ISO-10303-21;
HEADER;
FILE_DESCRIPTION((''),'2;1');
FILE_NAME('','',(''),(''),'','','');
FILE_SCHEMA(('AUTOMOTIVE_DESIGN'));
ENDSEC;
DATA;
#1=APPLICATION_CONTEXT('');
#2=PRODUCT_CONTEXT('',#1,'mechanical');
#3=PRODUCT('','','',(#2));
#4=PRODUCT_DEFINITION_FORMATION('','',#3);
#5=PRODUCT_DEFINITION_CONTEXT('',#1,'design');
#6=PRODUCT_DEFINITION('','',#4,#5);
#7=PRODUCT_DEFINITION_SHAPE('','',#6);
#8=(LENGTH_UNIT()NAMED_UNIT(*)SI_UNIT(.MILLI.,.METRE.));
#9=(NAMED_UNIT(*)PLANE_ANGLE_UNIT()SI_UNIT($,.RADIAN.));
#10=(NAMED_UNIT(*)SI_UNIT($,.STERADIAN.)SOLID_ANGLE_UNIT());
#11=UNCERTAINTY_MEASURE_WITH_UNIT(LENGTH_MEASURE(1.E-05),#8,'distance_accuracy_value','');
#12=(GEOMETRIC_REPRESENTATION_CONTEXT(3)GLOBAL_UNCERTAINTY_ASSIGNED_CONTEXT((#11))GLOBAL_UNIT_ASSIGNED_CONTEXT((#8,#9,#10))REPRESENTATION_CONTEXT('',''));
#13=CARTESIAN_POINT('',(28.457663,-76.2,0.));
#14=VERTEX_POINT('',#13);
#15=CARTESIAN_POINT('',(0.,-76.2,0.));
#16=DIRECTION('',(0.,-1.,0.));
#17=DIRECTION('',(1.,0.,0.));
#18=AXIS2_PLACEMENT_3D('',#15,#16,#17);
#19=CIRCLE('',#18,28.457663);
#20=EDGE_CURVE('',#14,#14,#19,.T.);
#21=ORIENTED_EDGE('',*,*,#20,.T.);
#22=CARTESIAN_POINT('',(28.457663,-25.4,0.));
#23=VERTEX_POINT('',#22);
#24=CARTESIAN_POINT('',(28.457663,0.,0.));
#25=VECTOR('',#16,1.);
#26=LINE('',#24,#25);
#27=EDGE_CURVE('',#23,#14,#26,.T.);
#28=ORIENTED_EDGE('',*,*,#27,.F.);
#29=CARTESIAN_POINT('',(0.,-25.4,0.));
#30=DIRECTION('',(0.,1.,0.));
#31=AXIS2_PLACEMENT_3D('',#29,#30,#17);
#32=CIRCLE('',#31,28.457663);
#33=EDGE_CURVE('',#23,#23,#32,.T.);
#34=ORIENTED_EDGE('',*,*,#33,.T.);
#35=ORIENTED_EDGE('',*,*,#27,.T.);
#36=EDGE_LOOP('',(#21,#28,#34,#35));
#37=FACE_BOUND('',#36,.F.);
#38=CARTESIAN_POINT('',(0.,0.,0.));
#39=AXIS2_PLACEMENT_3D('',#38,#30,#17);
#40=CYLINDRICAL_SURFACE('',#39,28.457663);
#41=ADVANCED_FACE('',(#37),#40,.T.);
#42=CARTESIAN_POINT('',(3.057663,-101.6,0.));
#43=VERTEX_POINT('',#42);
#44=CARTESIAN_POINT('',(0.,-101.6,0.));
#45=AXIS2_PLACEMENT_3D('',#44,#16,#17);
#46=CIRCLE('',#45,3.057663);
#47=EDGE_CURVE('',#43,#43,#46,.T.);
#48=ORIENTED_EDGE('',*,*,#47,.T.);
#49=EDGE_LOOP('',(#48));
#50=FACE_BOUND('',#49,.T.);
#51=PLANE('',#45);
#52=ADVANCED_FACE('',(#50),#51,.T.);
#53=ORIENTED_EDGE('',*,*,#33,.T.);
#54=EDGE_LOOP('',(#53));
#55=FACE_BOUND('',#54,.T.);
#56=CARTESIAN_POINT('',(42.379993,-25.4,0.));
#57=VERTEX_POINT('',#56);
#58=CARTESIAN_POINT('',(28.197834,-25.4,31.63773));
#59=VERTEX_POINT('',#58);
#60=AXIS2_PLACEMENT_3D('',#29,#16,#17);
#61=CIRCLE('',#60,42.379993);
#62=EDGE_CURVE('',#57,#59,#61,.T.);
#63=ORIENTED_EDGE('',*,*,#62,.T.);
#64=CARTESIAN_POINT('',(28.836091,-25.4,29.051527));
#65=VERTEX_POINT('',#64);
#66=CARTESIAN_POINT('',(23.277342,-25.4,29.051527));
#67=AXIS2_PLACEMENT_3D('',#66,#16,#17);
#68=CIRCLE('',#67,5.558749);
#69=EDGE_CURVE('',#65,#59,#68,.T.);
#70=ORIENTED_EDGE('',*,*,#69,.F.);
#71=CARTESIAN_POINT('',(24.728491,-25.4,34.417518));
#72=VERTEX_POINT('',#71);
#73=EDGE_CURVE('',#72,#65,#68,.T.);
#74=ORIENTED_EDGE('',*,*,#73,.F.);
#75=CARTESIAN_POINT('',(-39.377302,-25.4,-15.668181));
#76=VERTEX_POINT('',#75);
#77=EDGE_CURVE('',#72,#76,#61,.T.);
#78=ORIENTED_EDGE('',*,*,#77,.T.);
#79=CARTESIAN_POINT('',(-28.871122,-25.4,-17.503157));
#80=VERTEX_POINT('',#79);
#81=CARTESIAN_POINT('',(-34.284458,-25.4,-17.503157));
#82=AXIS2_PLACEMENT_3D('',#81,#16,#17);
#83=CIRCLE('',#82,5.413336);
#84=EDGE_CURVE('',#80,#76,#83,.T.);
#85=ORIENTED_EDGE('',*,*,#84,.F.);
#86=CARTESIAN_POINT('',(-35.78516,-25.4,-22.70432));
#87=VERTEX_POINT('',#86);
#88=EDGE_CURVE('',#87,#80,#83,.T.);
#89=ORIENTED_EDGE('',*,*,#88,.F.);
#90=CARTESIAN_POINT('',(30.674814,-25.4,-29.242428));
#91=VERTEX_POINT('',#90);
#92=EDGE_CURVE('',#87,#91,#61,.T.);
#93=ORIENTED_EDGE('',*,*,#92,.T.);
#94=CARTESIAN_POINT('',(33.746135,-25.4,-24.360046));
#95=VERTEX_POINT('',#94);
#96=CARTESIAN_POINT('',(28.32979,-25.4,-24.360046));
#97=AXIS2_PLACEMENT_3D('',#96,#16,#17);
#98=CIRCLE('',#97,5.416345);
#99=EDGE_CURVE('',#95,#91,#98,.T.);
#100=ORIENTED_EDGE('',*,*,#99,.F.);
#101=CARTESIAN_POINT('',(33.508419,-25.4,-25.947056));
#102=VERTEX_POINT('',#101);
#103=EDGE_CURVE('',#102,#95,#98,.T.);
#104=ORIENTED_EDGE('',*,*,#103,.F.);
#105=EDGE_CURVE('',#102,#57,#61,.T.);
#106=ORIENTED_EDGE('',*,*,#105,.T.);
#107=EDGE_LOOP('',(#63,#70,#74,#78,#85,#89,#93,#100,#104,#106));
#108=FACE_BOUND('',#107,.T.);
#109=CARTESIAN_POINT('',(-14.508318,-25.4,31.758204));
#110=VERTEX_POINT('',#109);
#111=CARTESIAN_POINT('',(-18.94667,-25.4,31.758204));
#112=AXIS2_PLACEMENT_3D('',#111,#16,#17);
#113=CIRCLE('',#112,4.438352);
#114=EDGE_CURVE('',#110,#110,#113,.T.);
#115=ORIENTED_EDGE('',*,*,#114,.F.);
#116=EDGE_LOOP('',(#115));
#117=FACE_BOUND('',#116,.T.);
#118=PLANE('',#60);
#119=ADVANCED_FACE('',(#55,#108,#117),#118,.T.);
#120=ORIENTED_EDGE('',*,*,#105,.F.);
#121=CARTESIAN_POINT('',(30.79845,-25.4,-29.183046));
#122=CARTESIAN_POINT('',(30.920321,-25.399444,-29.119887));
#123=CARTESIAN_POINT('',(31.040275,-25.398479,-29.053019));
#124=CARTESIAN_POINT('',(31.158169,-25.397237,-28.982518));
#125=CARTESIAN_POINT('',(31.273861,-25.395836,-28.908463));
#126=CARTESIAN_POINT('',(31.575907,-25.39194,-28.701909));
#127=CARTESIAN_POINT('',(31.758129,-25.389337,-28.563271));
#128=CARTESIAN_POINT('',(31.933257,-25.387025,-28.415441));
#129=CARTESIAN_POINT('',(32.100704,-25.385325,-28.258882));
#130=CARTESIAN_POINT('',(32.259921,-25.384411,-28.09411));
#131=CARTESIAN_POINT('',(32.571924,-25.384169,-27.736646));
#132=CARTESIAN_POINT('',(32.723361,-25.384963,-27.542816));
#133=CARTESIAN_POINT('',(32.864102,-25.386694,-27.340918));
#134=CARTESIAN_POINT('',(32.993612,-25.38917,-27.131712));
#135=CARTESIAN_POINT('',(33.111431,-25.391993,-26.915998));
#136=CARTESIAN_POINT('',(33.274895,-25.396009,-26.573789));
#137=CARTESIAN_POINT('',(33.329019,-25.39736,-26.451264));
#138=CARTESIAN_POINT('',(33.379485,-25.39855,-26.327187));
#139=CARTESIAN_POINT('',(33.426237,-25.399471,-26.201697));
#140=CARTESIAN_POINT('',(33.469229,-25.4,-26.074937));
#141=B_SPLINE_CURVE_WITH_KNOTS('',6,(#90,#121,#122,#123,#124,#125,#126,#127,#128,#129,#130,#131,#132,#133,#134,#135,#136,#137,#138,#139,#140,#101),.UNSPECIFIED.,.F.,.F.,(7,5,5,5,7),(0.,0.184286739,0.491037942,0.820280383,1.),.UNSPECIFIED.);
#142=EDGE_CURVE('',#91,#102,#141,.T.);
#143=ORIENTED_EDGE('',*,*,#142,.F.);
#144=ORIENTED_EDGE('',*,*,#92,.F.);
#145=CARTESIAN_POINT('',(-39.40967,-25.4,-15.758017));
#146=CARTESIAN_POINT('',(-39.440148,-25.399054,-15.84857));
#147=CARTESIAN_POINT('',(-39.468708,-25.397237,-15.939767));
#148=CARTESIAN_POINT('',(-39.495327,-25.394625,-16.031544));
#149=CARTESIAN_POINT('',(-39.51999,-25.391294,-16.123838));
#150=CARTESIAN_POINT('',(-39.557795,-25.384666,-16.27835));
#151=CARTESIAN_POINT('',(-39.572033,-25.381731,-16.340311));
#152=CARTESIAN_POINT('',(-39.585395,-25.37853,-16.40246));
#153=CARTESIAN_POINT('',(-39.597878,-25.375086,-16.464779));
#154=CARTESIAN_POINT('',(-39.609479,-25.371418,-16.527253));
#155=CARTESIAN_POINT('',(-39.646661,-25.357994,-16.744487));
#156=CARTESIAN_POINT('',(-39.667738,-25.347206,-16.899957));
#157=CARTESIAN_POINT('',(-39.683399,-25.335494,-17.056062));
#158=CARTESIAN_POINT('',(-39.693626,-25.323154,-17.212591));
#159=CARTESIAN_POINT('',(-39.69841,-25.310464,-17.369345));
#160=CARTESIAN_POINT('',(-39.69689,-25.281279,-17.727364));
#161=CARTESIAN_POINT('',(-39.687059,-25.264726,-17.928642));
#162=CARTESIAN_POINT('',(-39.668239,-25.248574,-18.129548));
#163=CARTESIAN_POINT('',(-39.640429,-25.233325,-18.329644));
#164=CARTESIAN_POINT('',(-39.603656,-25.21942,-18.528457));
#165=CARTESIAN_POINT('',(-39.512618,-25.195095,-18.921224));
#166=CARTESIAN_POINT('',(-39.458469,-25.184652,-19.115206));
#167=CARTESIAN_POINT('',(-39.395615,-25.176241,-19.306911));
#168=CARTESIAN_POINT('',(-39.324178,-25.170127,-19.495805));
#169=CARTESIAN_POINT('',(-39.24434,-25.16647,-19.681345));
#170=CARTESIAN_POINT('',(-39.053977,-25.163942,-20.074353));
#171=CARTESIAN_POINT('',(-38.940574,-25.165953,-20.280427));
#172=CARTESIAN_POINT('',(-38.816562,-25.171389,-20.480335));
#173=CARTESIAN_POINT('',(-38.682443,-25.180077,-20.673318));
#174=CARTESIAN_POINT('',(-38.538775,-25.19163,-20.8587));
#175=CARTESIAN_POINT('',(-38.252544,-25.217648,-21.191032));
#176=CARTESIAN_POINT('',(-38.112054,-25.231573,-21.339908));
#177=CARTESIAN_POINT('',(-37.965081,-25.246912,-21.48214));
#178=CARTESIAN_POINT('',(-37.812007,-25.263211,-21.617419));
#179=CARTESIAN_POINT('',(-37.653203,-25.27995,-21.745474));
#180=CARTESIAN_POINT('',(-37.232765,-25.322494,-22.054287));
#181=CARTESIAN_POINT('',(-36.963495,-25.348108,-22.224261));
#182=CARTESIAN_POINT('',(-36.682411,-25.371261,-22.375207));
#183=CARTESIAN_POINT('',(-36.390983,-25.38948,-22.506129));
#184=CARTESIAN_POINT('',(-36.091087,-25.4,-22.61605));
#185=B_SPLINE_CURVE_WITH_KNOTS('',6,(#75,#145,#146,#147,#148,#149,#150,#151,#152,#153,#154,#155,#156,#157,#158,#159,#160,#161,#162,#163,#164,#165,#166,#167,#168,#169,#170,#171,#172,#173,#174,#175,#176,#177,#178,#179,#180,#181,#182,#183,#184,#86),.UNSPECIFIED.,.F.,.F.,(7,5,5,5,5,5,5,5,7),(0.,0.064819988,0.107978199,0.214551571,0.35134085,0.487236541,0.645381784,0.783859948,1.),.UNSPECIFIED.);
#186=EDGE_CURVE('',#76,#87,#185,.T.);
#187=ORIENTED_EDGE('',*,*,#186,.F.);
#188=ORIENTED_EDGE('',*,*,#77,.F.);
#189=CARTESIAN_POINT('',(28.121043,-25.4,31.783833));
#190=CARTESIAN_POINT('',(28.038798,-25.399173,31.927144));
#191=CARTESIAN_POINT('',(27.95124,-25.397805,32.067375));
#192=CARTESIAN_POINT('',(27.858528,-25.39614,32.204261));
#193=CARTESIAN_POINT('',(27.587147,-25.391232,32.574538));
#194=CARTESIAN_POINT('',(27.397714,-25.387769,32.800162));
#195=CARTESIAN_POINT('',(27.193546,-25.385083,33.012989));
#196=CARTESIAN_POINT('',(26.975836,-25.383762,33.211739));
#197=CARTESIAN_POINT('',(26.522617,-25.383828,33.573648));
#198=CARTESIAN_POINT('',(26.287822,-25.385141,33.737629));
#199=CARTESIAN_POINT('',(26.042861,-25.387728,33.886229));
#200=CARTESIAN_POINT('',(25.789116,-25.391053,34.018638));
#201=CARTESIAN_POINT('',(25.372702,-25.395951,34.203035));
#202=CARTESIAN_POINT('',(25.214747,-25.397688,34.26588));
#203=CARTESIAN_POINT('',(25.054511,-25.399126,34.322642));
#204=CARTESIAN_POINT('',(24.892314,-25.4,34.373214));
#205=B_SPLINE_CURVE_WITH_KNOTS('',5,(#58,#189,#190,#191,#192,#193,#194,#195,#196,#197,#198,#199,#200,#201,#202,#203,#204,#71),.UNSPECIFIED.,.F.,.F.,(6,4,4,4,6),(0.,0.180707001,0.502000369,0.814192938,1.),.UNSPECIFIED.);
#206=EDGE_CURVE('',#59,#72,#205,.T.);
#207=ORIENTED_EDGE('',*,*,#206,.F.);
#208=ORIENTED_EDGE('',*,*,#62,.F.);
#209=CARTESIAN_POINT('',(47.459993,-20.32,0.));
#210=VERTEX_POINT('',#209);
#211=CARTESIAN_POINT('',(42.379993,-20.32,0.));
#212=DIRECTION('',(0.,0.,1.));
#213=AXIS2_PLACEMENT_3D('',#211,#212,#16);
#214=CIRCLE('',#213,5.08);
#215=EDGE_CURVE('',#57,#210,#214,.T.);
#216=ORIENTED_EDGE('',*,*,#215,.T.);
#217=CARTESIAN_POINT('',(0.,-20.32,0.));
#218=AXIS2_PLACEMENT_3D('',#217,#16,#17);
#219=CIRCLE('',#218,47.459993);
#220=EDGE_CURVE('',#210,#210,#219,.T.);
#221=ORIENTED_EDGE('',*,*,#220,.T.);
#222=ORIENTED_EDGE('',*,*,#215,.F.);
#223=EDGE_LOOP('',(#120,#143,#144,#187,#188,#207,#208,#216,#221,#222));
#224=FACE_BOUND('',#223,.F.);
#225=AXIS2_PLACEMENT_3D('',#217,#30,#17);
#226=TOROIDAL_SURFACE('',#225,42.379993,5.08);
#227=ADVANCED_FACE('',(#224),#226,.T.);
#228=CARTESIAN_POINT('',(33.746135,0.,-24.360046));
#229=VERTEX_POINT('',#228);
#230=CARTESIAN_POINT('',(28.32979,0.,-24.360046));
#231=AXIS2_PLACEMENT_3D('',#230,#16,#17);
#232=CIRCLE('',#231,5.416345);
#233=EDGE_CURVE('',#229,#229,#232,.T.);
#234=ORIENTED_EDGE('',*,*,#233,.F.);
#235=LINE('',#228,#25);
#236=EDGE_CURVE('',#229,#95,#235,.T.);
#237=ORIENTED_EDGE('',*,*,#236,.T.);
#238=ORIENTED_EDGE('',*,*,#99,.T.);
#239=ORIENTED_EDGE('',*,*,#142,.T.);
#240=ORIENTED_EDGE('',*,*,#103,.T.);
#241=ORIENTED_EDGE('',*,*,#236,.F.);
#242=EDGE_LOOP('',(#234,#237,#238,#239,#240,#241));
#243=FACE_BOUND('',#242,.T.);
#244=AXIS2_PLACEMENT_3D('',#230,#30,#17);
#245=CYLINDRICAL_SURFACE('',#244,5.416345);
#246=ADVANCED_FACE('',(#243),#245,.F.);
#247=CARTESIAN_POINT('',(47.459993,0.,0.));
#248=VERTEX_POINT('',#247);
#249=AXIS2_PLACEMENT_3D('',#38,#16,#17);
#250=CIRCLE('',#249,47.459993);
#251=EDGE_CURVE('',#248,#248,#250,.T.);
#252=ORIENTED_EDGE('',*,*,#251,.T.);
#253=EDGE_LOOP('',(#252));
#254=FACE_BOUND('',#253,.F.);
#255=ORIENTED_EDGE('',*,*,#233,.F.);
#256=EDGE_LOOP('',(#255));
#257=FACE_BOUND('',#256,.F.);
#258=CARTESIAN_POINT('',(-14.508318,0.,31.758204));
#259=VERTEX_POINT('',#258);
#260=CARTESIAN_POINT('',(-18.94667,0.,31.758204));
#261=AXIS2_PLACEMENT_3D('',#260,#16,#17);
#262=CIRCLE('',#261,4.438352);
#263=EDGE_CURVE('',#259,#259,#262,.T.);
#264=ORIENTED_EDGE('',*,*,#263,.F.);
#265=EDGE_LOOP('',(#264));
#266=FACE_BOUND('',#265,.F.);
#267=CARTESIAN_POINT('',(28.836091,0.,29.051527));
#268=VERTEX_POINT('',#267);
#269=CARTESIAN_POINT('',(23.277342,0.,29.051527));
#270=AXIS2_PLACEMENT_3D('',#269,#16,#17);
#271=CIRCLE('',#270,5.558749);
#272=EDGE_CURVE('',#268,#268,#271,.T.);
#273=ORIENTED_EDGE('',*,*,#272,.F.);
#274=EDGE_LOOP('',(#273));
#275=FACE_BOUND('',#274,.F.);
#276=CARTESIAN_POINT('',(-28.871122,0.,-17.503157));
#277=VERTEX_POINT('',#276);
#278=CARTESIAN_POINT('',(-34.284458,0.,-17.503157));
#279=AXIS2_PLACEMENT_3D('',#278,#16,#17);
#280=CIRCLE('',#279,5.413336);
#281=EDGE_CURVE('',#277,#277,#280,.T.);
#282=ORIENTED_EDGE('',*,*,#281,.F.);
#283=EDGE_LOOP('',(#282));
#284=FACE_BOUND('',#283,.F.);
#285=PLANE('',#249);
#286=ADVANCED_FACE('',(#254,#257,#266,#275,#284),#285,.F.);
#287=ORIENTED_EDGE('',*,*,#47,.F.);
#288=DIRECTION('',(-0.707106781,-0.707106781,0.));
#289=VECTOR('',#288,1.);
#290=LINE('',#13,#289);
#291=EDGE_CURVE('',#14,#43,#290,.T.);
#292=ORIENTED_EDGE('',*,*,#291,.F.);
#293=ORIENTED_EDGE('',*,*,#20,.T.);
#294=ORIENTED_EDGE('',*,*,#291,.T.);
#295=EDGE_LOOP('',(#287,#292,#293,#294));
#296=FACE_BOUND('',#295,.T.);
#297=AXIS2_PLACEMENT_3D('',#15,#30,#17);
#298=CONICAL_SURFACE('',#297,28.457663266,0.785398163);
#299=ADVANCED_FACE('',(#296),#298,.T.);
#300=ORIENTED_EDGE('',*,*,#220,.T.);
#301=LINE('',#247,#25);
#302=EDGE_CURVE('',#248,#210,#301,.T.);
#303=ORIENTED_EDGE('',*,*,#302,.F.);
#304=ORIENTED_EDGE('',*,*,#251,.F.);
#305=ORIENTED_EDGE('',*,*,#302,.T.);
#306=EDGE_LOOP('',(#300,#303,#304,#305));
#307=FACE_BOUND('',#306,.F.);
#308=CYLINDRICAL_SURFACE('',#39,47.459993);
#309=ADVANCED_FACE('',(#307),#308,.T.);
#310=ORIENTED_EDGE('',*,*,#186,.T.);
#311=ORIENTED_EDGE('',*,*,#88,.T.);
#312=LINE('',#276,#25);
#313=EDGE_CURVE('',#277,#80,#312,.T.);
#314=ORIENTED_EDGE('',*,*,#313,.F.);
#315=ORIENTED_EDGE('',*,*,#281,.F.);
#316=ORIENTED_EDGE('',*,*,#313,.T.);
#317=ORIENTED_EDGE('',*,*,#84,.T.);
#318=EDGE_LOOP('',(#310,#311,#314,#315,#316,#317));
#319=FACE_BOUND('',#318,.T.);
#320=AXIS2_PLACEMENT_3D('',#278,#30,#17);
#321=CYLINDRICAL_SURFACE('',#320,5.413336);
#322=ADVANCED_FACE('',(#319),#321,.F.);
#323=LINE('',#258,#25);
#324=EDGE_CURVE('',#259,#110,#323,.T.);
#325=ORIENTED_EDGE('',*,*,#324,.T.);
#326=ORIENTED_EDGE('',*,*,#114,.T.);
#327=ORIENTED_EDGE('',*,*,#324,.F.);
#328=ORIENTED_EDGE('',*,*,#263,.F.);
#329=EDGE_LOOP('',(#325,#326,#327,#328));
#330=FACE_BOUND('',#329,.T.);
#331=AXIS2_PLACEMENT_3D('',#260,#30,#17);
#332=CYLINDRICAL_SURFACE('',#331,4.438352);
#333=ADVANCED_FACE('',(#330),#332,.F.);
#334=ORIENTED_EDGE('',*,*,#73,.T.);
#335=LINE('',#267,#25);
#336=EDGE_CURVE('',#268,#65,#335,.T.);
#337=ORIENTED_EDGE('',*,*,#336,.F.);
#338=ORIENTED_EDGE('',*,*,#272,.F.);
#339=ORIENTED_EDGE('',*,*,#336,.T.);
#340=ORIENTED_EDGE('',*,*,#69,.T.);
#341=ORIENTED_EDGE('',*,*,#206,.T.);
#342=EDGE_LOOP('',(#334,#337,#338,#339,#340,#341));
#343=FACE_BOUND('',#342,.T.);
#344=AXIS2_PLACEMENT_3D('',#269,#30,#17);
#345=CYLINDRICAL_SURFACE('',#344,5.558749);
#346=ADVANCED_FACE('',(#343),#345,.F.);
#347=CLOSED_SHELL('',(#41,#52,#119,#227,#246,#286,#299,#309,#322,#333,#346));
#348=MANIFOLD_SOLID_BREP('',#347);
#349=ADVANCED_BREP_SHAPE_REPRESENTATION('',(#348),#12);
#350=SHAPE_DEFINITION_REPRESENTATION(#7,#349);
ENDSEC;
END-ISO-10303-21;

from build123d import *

# Parameters (mm, degrees)
F0_R     = 47.4599930616
F0_R_2   = 5.4133355618
F0_R_3   = 5.4163453987
F0_R_4   = 4.4383518645
F0_R_5   = 28.344153959
F0_R_6   = 5.55874857
F1_DEPTH = 25.4
F2_R     = 28.4576632657
F3_DEPTH = 101.6
F4_SIZE  = 25.4


# Not quite as in the source:
# - a fillet or chamfer that OpenCascade refuses, or shapes differently, is made with other operations: its cross-section is extruded or revolved along the edge and cut away or added


with BuildPart() as f1:
    # F0 (on Front) → F1 (new body)
    with BuildSketch(Plane.XZ):
        Circle(F0_R)
        with Locations((-34.2844575644, -17.503157258)):
            Circle(F0_R_2, mode=Mode.SUBTRACT)
        with Locations((28.3297896385, -24.3600457907)):
            Circle(F0_R_3, mode=Mode.SUBTRACT)
        with Locations((-18.9466699958, 31.7582041025)):
            Circle(F0_R_4, mode=Mode.SUBTRACT)
        Circle(F0_R_5, mode=Mode.SUBTRACT)
        with Locations((23.2773423195, 29.0515273809)):
            Circle(F0_R_6, mode=Mode.SUBTRACT)
    extrude(amount=F1_DEPTH)

    # F2 (on Front) → F3 (join)
    with BuildSketch(Plane.XZ):
        Circle(F2_R)
    extrude(amount=F3_DEPTH)

    # F4
    f4_edges = [f1.edges().sort_by_distance(p)[0] for p in [
        (-28.457663, -101.6, 0),
    ]]
    chamfer(f4_edges, length=F4_SIZE)

    # F5: fillet of radius 5.08 on 1 edges, made by hand

    # F5_s1 → F5_t2 (revolve, cut)
    with BuildSketch(Plane.XY):
        with BuildLine():
            ThreePointArc((42.3799930616, -25.4), (45.9720955101, -23.9121024484), (47.4599930616, -20.32))
            Line((47.4599930616, -20.32), (47.4599930616, -25.4))
            Line((47.4599930616, -25.4), (42.3799930616, -25.4))
        make_face()
    revolve(axis=Axis((0, -25.4, 0), (0, -1, 0)), mode=Mode.SUBTRACT)


solid = f1.part
